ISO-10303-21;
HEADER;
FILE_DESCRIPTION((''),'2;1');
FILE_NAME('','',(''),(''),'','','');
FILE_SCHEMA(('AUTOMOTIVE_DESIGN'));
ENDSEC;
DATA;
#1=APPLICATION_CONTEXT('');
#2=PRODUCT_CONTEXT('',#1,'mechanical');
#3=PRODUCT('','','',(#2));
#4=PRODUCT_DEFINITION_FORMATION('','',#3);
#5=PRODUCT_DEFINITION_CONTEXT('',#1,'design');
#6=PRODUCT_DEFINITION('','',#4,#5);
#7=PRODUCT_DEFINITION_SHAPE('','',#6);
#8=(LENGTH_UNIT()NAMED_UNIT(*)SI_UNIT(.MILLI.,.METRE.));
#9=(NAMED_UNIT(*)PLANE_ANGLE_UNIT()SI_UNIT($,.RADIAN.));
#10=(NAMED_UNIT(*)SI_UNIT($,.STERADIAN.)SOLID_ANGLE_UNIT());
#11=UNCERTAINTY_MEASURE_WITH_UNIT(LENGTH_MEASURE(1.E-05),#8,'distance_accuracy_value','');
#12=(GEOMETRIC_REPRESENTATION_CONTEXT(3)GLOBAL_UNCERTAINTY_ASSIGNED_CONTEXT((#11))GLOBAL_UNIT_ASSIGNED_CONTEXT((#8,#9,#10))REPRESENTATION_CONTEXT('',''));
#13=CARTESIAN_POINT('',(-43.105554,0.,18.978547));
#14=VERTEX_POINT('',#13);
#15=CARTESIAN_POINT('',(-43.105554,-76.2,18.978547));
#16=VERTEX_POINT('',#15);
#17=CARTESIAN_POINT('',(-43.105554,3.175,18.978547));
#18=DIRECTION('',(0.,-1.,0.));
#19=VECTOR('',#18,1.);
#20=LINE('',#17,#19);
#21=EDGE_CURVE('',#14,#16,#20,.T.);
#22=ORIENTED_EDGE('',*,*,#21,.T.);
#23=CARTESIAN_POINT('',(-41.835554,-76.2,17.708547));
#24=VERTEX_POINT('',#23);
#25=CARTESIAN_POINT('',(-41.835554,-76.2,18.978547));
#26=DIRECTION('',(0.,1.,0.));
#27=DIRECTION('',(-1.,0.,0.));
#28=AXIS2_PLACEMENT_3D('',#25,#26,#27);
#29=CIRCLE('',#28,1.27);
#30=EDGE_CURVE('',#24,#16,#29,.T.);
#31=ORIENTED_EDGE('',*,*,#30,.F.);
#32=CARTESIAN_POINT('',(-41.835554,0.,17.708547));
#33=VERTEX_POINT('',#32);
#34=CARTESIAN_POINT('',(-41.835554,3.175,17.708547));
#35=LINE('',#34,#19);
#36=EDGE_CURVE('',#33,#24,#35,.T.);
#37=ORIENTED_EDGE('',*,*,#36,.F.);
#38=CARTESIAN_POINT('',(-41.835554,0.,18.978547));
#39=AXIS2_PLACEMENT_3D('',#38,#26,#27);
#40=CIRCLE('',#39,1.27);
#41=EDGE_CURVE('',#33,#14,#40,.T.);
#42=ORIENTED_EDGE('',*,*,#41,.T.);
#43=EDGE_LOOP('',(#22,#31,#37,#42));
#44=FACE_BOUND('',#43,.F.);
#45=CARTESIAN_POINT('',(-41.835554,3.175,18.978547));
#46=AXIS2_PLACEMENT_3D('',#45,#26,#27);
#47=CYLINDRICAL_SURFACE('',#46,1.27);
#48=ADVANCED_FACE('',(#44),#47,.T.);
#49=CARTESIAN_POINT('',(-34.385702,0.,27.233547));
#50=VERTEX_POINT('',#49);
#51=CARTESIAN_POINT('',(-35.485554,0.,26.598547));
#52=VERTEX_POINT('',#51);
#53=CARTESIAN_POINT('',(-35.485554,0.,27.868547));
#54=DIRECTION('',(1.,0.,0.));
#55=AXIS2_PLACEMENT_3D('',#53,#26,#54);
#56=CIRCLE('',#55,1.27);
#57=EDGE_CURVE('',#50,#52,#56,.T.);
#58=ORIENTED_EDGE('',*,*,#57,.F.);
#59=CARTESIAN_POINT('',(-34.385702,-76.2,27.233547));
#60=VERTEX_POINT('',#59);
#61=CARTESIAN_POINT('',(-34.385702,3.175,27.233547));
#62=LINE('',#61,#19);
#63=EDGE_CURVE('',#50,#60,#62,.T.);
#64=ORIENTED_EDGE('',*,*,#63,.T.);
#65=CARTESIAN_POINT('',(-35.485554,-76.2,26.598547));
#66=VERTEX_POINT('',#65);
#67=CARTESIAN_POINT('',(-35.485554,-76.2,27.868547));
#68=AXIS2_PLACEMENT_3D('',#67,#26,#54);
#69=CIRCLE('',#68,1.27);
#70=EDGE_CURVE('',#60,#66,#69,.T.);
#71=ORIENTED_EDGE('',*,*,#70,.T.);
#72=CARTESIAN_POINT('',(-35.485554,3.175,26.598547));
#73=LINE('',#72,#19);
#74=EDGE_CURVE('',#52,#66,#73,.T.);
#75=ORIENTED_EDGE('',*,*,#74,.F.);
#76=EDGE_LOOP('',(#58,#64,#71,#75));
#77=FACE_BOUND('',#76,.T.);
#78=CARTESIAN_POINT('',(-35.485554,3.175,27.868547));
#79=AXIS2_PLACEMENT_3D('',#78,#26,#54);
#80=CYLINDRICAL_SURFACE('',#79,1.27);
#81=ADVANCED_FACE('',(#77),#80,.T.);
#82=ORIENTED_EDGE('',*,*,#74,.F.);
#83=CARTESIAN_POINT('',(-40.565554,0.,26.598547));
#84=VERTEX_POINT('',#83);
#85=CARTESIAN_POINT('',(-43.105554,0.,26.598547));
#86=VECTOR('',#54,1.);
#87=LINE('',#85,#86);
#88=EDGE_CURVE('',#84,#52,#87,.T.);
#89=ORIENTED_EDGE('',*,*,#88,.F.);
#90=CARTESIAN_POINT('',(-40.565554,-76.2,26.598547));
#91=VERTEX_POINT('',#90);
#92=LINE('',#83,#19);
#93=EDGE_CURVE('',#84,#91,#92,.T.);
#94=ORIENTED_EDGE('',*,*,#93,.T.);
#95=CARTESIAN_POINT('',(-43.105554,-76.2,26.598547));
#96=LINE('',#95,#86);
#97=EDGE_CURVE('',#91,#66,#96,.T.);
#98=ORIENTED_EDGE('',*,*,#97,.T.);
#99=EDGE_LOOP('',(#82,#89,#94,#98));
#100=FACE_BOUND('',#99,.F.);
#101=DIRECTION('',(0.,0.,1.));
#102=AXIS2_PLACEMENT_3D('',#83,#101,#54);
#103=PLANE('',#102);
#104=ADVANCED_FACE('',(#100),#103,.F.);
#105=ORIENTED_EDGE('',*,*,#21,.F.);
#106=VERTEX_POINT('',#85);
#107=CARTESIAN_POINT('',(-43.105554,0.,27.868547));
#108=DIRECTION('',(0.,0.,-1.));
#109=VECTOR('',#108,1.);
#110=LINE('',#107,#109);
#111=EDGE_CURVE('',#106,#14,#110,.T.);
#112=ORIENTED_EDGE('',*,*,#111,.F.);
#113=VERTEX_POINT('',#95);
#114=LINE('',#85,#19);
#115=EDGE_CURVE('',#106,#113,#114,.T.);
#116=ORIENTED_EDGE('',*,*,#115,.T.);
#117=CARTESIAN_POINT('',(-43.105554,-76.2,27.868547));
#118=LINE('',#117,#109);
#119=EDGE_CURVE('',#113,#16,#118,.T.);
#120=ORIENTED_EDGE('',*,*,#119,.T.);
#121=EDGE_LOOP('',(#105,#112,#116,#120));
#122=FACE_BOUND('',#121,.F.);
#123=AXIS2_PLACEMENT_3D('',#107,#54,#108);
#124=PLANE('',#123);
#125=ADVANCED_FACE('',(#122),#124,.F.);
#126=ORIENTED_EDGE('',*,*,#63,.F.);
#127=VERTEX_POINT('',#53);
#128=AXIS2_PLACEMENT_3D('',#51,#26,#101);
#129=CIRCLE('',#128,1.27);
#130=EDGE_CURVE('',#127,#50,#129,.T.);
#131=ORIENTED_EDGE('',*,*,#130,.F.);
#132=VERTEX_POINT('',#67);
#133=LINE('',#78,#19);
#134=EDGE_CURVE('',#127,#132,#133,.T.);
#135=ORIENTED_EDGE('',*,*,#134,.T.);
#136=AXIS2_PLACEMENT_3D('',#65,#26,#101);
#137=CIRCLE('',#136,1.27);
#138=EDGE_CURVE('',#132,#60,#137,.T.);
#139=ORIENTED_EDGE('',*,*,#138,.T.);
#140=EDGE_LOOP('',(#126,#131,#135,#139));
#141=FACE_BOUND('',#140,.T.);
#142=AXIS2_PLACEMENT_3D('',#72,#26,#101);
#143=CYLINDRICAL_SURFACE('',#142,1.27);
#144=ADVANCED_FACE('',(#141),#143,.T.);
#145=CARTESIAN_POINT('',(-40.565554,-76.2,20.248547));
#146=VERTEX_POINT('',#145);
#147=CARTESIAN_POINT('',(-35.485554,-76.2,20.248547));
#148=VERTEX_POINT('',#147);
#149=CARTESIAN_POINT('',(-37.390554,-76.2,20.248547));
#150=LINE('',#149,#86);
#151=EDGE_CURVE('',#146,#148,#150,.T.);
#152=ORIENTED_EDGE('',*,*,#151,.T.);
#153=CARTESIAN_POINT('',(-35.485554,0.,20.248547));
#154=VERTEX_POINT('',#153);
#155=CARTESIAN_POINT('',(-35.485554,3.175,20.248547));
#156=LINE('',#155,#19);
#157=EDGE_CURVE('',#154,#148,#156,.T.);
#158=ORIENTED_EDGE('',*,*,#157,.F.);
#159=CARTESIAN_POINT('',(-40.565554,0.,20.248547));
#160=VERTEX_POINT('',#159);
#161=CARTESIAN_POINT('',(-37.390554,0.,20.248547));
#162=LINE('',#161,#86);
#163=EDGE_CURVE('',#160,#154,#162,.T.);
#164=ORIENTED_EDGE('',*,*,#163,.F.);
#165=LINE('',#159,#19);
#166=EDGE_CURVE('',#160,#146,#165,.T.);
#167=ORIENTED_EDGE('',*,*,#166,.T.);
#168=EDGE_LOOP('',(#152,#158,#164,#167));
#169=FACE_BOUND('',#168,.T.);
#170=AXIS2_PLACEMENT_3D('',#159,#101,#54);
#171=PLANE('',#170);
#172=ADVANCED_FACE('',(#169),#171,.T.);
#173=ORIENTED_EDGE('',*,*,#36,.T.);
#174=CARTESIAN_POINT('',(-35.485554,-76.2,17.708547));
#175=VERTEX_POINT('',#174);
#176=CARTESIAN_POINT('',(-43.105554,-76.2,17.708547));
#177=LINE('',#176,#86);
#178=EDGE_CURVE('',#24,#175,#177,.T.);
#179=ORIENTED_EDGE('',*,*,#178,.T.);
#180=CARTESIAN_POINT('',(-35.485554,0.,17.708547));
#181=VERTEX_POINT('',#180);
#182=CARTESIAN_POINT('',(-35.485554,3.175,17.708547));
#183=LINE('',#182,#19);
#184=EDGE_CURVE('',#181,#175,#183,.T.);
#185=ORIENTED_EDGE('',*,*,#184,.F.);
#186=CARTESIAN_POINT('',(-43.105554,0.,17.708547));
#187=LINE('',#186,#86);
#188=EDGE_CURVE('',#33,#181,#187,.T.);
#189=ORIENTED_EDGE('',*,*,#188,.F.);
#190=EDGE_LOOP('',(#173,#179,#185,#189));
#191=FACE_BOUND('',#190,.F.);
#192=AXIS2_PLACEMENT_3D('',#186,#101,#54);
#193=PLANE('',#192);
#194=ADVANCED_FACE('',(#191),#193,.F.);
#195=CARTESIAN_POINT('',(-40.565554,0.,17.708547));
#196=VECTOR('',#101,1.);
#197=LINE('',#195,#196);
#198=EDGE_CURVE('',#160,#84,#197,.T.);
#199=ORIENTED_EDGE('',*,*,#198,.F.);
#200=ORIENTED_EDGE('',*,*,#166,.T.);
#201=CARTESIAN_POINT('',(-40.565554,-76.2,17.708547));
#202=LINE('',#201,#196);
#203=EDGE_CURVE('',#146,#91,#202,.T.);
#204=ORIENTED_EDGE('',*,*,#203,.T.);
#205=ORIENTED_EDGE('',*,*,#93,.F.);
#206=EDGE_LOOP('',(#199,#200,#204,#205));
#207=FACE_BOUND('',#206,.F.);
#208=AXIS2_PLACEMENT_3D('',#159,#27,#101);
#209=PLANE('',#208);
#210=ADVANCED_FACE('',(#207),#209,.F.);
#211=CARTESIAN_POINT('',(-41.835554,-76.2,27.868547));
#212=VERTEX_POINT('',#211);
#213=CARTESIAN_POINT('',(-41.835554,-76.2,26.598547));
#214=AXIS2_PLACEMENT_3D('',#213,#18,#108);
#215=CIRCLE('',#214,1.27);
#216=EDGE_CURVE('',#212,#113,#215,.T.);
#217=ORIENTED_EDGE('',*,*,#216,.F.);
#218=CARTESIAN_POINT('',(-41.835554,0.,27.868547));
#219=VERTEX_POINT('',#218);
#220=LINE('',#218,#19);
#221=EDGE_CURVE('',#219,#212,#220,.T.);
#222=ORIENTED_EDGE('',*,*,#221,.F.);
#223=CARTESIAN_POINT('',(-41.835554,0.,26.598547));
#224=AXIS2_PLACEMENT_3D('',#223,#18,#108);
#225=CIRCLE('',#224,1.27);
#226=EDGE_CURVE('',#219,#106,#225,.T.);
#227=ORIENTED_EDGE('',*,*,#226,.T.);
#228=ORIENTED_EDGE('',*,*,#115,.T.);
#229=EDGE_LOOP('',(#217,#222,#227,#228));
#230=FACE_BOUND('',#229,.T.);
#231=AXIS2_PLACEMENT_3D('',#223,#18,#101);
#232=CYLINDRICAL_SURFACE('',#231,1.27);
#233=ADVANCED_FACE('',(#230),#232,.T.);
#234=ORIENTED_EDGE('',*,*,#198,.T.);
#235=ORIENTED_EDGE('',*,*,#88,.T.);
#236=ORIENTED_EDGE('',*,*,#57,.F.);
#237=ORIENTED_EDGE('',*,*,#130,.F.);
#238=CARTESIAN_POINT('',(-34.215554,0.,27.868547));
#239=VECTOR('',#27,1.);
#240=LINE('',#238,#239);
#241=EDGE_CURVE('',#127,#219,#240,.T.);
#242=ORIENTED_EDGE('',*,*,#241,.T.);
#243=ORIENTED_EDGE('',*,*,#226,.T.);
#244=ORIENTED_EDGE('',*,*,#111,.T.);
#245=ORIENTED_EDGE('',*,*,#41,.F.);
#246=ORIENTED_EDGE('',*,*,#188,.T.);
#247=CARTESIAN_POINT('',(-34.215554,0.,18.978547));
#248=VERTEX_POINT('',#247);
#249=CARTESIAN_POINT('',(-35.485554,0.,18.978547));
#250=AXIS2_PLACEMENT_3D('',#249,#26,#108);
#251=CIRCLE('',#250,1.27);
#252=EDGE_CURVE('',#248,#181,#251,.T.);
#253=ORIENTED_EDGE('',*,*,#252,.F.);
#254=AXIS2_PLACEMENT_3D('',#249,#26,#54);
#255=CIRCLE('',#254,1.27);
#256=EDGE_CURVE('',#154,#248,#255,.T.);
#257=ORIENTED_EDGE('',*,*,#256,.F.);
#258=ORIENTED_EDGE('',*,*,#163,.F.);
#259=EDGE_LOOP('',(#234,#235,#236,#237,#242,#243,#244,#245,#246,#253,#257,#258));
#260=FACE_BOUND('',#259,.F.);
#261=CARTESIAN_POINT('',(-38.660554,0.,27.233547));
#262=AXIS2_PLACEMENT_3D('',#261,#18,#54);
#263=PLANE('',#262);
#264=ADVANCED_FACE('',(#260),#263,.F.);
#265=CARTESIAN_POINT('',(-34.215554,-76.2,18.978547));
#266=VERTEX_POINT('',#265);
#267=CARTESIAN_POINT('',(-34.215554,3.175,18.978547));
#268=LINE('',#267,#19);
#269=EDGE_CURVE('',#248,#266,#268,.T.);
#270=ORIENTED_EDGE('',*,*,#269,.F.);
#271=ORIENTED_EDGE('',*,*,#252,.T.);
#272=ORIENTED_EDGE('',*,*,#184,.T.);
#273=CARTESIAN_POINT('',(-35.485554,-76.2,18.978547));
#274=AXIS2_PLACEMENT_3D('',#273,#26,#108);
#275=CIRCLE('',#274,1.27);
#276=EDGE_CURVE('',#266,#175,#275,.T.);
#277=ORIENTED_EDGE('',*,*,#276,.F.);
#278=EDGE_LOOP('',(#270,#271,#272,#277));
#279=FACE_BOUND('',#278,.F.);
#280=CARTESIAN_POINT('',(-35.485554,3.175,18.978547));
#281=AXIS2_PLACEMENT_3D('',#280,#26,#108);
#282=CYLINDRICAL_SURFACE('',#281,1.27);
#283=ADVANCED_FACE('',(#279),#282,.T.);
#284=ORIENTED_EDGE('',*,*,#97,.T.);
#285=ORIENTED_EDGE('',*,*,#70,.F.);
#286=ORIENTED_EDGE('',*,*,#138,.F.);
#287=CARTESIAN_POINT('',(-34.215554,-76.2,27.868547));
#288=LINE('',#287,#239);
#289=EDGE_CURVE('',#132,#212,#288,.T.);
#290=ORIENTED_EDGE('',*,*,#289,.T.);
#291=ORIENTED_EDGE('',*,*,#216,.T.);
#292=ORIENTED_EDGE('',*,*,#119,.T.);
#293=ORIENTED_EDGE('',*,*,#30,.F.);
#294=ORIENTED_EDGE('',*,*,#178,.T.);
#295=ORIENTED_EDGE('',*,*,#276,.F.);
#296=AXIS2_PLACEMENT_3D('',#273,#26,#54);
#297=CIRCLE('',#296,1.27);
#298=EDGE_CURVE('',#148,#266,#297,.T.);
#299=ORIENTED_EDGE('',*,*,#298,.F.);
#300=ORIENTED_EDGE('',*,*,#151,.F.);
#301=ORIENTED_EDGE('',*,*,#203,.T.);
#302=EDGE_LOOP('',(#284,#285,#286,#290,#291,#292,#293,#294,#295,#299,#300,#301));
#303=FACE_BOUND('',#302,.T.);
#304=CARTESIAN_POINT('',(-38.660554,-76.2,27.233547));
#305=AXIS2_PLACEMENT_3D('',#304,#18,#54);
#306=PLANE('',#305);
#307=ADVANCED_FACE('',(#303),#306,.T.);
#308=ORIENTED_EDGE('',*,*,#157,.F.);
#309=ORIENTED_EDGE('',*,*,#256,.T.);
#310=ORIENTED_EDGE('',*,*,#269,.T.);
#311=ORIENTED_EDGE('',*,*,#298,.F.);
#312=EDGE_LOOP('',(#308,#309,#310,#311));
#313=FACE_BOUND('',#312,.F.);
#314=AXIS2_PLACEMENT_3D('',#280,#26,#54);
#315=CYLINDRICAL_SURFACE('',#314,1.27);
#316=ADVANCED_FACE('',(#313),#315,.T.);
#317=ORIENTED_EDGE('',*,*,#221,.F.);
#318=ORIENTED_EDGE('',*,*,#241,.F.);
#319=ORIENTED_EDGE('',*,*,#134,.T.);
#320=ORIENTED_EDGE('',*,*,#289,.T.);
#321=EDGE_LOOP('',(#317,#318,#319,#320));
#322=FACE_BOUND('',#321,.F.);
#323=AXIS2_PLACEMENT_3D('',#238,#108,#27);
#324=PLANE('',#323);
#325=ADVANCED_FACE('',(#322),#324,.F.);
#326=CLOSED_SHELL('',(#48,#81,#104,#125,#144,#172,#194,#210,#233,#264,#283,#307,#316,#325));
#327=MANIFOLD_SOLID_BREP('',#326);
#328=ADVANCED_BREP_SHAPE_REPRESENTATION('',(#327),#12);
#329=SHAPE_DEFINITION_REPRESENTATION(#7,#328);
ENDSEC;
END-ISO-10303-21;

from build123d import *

# Parameters (mm, degrees)
F0_W        = 6.35
F0_H        = 2.54
F1_DEPTH    = 76.2
F2_R        = 1.27
F3_T1_DEPTH = 82.55


# Not quite as in the source:
# - a fillet or chamfer that OpenCascade refuses, or shapes differently, is made with other operations: its cross-section is extruded or revolved along the edge and cut away or added


with BuildPart() as f1:
    # F0 (on Front) → F1 (new body)
    with BuildSketch(Plane.XZ):
        Polygon((-43.1055540526, 26.5985474133), (-40.5655540526, 26.5985474133), (-34.2155540526, 26.5985474133), (-34.2155540526, 27.8685474133), (-43.1055540526, 27.8685474133), align=None)
        Polygon((-40.5655540526, 20.2485474133), (-40.5655540526, 26.5985474133), (-43.1055540526, 26.5985474133), (-43.1055540526, 17.7085474133), (-40.5655540526, 17.7085474133), align=None)
        with Locations((-37.3905540526, 18.9785474133)):
            Rectangle(F0_W, F0_H)
    extrude(amount=F1_DEPTH)

    # F2
    f2_edges = [f1.edges().sort_by_distance(p)[0] for p in [
        (-43.105554, -38.1, 27.868547),
    ]]
    fillet(f2_edges, radius=F2_R)

    # F3: fillet of radius 1.27 on 5 edges, made by hand

    # F3_s2 → F3_t1 (cut)
    with BuildSketch(Plane.XZ.offset(-3.175)):
        with BuildLine():
            ThreePointArc((-43.1055540526, 18.9785474133), (-42.7335796647, 18.0805218012), (-41.8355540526, 17.7085474133))
            Line((-41.8355540526, 17.7085474133), (-43.1055540526, 17.7085474133))
            Line((-43.1055540526, 17.7085474133), (-43.1055540526, 18.9785474133))
        make_face()
        with BuildLine():
            ThreePointArc((-34.2155540526, 27.8685474133), (-34.5875284405, 26.9705218012), (-35.4855540526, 26.5985474133))
            Line((-35.4855540526, 26.5985474133), (-34.2155540526, 26.5985474133))
            Line((-34.2155540526, 26.5985474133), (-34.2155540526, 27.8685474133))
        make_face()
        with BuildLine():
            ThreePointArc((-34.2155540526, 18.9785474133), (-34.5875284405, 19.8765730255), (-35.4855540526, 20.2485474133))
            Line((-35.4855540526, 20.2485474133), (-34.2155540526, 20.2485474133))
            Line((-34.2155540526, 20.2485474133), (-34.2155540526, 18.9785474133))
        make_face()
        with BuildLine():
            ThreePointArc((-35.4855540526, 17.7085474133), (-34.5875284405, 18.0805218012), (-34.2155540526, 18.9785474133))
            Line((-34.2155540526, 18.9785474133), (-34.2155540526, 17.7085474133))
            Line((-34.2155540526, 17.7085474133), (-35.4855540526, 17.7085474133))
        make_face()
        with BuildLine():
            ThreePointArc((-35.4855540526, 27.8685474133), (-34.5875284405, 27.4965730255), (-34.2155540526, 26.5985474133))
            Line((-34.2155540526, 26.5985474133), (-34.2155540526, 27.8685474133))
            Line((-34.2155540526, 27.8685474133), (-35.4855540526, 27.8685474133))
        make_face()
    extrude(amount=F3_T1_DEPTH, mode=Mode.SUBTRACT)


solid = f1.part
